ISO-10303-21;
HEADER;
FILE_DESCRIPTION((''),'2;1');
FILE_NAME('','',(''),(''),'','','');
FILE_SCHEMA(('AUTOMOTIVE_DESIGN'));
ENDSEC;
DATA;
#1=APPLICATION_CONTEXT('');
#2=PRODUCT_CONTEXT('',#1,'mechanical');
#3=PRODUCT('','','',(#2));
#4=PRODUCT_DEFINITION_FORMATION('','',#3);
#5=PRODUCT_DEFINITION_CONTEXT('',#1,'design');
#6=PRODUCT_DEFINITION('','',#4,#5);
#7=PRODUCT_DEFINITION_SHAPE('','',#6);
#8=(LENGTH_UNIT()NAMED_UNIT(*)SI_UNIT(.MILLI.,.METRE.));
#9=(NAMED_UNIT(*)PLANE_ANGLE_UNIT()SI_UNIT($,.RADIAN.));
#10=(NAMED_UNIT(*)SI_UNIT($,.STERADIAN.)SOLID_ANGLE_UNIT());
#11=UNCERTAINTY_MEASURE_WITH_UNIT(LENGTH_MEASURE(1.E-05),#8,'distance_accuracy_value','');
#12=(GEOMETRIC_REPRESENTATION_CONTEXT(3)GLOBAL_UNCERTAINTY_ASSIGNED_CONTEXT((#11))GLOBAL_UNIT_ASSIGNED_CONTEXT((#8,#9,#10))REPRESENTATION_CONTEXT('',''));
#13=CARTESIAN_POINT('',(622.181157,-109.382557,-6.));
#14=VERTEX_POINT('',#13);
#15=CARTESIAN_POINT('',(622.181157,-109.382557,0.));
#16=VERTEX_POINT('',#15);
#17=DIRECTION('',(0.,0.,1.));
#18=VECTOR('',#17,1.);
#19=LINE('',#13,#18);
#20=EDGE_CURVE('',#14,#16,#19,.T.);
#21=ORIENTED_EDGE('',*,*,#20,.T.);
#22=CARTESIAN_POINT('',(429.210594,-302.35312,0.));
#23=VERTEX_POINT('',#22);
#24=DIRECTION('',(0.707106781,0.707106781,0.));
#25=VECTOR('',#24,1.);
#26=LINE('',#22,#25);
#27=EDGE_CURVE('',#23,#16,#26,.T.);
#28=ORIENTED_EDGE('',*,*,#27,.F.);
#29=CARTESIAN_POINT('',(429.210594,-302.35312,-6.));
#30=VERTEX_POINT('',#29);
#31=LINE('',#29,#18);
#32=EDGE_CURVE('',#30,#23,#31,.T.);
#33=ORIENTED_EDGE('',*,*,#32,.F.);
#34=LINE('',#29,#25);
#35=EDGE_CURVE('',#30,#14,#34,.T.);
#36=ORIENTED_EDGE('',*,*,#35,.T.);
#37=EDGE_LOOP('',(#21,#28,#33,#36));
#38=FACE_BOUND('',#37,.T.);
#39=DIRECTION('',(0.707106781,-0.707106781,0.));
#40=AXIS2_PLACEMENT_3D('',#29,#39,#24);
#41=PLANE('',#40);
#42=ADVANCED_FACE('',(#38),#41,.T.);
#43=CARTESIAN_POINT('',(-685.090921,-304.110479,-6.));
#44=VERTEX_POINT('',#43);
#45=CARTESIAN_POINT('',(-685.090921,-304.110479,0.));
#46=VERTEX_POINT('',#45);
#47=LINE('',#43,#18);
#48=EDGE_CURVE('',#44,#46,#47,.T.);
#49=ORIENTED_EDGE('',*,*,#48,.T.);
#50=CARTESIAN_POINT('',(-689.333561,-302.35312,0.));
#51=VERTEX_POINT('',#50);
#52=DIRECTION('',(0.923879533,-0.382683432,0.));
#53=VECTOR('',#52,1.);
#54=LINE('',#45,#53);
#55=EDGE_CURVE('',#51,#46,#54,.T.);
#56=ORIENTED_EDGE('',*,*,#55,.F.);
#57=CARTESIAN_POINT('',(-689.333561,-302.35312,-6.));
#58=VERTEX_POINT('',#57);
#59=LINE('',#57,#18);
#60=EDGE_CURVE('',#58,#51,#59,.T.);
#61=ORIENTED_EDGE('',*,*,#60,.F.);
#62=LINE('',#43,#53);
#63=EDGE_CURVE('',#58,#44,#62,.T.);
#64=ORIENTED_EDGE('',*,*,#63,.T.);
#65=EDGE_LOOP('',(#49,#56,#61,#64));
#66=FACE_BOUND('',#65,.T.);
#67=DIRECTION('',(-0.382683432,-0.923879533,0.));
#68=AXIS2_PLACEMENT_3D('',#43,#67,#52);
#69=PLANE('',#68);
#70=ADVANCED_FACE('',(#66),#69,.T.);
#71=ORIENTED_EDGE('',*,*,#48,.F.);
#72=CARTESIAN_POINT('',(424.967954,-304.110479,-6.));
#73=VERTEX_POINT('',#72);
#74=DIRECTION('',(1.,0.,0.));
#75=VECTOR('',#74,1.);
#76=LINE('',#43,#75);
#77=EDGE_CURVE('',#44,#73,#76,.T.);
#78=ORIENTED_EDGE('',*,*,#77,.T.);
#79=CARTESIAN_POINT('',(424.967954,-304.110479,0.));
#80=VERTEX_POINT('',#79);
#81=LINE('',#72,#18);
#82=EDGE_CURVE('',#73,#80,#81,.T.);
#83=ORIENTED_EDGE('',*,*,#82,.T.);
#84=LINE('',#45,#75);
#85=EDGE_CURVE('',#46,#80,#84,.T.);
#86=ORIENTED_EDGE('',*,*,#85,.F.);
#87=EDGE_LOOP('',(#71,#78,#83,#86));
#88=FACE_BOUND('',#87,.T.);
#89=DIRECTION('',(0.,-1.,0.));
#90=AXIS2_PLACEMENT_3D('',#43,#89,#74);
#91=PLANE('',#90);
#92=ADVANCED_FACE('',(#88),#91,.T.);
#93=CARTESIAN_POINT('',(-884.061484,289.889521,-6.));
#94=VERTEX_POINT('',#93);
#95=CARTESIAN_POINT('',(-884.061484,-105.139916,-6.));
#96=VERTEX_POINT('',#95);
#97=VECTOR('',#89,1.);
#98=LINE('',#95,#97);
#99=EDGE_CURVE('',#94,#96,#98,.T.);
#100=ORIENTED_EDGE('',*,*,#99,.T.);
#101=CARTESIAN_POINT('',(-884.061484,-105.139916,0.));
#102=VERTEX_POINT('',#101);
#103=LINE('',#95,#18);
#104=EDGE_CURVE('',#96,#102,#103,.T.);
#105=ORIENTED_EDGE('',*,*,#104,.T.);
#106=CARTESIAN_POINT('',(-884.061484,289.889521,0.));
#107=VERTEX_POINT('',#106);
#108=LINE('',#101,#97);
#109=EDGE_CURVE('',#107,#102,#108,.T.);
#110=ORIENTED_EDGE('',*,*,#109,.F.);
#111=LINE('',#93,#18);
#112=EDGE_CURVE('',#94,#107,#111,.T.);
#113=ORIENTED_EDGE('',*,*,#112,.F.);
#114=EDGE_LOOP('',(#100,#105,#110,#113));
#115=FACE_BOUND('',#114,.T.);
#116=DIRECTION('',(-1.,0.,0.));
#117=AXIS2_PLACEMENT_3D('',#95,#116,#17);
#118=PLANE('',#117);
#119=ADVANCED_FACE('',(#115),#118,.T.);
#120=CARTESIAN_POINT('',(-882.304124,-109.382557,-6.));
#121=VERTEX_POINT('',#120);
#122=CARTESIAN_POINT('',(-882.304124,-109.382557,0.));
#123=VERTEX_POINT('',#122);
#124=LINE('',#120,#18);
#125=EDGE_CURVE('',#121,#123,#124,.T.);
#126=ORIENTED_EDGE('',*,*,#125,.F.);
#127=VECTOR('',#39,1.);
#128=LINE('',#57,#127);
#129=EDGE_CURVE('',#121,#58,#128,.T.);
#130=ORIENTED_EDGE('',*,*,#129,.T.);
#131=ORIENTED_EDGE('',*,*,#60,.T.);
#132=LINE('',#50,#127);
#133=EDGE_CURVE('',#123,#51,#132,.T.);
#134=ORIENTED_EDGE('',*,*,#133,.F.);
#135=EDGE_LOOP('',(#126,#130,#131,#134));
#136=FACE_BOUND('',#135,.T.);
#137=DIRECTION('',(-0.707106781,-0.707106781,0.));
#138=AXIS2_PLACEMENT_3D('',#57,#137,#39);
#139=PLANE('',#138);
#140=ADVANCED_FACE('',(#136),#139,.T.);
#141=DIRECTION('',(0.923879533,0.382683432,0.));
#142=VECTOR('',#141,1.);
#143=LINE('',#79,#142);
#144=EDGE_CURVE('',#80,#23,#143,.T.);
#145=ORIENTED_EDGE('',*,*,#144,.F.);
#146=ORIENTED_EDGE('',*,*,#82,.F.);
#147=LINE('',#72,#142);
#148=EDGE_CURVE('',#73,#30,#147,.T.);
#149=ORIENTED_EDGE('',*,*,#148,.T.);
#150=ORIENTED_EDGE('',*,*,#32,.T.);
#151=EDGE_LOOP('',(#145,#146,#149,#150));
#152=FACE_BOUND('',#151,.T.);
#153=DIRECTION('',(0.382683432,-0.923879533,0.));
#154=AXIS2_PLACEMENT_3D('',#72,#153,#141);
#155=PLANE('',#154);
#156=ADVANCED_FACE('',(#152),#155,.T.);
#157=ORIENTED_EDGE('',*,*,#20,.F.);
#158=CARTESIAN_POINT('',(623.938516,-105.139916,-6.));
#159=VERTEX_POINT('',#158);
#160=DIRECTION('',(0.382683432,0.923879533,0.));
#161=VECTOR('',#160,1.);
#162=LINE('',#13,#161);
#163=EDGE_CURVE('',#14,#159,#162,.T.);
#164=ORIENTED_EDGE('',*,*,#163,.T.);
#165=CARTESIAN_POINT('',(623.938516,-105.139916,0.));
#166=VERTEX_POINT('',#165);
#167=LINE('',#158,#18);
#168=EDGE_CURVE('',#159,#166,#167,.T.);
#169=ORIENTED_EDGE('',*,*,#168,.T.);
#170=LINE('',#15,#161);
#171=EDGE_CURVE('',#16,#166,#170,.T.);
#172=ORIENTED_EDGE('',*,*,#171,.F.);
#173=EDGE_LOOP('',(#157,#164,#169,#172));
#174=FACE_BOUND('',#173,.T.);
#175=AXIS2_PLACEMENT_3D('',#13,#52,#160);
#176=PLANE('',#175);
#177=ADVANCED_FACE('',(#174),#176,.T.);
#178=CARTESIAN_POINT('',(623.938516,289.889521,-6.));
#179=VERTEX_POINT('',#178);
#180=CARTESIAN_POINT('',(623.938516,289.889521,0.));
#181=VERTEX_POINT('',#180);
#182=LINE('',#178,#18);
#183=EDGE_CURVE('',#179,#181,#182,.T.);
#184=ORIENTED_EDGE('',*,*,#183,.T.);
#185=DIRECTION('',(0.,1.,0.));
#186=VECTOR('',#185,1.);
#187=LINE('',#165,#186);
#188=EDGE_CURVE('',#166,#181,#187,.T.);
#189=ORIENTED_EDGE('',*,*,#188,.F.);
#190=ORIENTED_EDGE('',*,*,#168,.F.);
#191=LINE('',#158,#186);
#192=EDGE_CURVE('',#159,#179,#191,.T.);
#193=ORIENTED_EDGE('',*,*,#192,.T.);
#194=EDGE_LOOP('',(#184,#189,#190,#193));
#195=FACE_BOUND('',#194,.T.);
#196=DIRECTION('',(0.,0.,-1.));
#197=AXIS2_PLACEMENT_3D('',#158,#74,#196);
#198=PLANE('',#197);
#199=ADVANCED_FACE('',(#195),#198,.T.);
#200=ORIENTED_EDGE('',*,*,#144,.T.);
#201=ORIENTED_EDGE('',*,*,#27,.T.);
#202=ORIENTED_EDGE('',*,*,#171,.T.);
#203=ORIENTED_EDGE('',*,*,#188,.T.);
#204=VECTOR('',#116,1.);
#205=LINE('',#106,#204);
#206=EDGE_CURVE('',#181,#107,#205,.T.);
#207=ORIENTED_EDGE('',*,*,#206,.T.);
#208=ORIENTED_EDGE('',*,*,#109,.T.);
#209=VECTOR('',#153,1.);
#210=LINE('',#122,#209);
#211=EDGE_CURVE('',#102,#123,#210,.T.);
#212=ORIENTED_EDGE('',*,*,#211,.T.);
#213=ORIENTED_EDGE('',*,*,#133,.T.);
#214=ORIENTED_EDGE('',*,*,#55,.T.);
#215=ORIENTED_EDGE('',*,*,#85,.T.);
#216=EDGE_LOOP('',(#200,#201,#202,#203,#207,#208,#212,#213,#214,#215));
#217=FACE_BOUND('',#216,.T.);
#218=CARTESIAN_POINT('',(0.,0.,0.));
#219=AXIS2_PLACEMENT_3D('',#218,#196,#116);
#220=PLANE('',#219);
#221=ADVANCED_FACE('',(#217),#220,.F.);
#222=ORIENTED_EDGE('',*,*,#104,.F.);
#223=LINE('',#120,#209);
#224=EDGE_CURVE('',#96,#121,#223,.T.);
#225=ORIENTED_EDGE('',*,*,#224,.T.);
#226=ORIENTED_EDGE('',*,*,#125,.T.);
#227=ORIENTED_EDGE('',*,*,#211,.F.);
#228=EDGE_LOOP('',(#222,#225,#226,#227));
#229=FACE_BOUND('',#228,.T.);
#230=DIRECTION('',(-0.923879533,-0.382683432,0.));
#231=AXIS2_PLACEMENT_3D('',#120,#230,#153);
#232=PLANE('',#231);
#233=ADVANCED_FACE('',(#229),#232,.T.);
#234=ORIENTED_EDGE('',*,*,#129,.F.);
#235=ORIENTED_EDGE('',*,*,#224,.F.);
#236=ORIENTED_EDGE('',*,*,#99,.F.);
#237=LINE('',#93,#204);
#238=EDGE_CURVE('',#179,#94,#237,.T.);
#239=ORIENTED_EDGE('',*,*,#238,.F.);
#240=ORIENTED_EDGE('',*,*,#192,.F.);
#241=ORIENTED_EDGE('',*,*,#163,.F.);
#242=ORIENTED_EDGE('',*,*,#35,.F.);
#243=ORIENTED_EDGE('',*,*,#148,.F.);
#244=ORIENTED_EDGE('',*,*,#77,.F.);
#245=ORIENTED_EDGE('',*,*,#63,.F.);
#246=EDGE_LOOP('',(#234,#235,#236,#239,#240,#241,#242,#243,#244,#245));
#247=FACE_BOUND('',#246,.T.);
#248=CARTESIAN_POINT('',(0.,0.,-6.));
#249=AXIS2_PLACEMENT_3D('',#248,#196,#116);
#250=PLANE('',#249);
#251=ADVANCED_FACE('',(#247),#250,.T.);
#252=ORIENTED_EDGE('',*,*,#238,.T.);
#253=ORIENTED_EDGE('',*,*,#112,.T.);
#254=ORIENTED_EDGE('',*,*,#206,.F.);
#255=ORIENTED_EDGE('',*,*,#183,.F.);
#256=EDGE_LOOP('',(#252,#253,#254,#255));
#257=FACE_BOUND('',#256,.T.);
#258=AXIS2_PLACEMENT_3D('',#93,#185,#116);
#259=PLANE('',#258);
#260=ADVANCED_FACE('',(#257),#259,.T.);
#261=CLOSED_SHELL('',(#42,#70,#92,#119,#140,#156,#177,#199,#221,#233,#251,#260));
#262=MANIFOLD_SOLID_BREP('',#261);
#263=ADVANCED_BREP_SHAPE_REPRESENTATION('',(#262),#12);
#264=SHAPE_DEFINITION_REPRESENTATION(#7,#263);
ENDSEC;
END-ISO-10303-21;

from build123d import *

# Parameters (mm, degrees)
TABAN_FLAN_1_DEPTH = 6


# Sheet-metal steps are written as plain solids
with BuildPart() as part:
    # Çizim1 → Taban-Flanş1 (new body)
    with BuildSketch(Plane.XY):
        Polygon((-685.090920801, -304.110479042), (424.967953702, -304.110479042), (429.210594389, -302.353119729), (622.181157137, -109.382556981), (623.93851645, -105.139916293), (623.93851645, 289.889520958), (-884.06148355, 289.889520958), (-884.06148355, -105.139916293), (-882.304124237, -109.382556981), (-689.333561488, -302.353119729), align=None)
    extrude(amount=-TABAN_FLAN_1_DEPTH)


solid = part.part
